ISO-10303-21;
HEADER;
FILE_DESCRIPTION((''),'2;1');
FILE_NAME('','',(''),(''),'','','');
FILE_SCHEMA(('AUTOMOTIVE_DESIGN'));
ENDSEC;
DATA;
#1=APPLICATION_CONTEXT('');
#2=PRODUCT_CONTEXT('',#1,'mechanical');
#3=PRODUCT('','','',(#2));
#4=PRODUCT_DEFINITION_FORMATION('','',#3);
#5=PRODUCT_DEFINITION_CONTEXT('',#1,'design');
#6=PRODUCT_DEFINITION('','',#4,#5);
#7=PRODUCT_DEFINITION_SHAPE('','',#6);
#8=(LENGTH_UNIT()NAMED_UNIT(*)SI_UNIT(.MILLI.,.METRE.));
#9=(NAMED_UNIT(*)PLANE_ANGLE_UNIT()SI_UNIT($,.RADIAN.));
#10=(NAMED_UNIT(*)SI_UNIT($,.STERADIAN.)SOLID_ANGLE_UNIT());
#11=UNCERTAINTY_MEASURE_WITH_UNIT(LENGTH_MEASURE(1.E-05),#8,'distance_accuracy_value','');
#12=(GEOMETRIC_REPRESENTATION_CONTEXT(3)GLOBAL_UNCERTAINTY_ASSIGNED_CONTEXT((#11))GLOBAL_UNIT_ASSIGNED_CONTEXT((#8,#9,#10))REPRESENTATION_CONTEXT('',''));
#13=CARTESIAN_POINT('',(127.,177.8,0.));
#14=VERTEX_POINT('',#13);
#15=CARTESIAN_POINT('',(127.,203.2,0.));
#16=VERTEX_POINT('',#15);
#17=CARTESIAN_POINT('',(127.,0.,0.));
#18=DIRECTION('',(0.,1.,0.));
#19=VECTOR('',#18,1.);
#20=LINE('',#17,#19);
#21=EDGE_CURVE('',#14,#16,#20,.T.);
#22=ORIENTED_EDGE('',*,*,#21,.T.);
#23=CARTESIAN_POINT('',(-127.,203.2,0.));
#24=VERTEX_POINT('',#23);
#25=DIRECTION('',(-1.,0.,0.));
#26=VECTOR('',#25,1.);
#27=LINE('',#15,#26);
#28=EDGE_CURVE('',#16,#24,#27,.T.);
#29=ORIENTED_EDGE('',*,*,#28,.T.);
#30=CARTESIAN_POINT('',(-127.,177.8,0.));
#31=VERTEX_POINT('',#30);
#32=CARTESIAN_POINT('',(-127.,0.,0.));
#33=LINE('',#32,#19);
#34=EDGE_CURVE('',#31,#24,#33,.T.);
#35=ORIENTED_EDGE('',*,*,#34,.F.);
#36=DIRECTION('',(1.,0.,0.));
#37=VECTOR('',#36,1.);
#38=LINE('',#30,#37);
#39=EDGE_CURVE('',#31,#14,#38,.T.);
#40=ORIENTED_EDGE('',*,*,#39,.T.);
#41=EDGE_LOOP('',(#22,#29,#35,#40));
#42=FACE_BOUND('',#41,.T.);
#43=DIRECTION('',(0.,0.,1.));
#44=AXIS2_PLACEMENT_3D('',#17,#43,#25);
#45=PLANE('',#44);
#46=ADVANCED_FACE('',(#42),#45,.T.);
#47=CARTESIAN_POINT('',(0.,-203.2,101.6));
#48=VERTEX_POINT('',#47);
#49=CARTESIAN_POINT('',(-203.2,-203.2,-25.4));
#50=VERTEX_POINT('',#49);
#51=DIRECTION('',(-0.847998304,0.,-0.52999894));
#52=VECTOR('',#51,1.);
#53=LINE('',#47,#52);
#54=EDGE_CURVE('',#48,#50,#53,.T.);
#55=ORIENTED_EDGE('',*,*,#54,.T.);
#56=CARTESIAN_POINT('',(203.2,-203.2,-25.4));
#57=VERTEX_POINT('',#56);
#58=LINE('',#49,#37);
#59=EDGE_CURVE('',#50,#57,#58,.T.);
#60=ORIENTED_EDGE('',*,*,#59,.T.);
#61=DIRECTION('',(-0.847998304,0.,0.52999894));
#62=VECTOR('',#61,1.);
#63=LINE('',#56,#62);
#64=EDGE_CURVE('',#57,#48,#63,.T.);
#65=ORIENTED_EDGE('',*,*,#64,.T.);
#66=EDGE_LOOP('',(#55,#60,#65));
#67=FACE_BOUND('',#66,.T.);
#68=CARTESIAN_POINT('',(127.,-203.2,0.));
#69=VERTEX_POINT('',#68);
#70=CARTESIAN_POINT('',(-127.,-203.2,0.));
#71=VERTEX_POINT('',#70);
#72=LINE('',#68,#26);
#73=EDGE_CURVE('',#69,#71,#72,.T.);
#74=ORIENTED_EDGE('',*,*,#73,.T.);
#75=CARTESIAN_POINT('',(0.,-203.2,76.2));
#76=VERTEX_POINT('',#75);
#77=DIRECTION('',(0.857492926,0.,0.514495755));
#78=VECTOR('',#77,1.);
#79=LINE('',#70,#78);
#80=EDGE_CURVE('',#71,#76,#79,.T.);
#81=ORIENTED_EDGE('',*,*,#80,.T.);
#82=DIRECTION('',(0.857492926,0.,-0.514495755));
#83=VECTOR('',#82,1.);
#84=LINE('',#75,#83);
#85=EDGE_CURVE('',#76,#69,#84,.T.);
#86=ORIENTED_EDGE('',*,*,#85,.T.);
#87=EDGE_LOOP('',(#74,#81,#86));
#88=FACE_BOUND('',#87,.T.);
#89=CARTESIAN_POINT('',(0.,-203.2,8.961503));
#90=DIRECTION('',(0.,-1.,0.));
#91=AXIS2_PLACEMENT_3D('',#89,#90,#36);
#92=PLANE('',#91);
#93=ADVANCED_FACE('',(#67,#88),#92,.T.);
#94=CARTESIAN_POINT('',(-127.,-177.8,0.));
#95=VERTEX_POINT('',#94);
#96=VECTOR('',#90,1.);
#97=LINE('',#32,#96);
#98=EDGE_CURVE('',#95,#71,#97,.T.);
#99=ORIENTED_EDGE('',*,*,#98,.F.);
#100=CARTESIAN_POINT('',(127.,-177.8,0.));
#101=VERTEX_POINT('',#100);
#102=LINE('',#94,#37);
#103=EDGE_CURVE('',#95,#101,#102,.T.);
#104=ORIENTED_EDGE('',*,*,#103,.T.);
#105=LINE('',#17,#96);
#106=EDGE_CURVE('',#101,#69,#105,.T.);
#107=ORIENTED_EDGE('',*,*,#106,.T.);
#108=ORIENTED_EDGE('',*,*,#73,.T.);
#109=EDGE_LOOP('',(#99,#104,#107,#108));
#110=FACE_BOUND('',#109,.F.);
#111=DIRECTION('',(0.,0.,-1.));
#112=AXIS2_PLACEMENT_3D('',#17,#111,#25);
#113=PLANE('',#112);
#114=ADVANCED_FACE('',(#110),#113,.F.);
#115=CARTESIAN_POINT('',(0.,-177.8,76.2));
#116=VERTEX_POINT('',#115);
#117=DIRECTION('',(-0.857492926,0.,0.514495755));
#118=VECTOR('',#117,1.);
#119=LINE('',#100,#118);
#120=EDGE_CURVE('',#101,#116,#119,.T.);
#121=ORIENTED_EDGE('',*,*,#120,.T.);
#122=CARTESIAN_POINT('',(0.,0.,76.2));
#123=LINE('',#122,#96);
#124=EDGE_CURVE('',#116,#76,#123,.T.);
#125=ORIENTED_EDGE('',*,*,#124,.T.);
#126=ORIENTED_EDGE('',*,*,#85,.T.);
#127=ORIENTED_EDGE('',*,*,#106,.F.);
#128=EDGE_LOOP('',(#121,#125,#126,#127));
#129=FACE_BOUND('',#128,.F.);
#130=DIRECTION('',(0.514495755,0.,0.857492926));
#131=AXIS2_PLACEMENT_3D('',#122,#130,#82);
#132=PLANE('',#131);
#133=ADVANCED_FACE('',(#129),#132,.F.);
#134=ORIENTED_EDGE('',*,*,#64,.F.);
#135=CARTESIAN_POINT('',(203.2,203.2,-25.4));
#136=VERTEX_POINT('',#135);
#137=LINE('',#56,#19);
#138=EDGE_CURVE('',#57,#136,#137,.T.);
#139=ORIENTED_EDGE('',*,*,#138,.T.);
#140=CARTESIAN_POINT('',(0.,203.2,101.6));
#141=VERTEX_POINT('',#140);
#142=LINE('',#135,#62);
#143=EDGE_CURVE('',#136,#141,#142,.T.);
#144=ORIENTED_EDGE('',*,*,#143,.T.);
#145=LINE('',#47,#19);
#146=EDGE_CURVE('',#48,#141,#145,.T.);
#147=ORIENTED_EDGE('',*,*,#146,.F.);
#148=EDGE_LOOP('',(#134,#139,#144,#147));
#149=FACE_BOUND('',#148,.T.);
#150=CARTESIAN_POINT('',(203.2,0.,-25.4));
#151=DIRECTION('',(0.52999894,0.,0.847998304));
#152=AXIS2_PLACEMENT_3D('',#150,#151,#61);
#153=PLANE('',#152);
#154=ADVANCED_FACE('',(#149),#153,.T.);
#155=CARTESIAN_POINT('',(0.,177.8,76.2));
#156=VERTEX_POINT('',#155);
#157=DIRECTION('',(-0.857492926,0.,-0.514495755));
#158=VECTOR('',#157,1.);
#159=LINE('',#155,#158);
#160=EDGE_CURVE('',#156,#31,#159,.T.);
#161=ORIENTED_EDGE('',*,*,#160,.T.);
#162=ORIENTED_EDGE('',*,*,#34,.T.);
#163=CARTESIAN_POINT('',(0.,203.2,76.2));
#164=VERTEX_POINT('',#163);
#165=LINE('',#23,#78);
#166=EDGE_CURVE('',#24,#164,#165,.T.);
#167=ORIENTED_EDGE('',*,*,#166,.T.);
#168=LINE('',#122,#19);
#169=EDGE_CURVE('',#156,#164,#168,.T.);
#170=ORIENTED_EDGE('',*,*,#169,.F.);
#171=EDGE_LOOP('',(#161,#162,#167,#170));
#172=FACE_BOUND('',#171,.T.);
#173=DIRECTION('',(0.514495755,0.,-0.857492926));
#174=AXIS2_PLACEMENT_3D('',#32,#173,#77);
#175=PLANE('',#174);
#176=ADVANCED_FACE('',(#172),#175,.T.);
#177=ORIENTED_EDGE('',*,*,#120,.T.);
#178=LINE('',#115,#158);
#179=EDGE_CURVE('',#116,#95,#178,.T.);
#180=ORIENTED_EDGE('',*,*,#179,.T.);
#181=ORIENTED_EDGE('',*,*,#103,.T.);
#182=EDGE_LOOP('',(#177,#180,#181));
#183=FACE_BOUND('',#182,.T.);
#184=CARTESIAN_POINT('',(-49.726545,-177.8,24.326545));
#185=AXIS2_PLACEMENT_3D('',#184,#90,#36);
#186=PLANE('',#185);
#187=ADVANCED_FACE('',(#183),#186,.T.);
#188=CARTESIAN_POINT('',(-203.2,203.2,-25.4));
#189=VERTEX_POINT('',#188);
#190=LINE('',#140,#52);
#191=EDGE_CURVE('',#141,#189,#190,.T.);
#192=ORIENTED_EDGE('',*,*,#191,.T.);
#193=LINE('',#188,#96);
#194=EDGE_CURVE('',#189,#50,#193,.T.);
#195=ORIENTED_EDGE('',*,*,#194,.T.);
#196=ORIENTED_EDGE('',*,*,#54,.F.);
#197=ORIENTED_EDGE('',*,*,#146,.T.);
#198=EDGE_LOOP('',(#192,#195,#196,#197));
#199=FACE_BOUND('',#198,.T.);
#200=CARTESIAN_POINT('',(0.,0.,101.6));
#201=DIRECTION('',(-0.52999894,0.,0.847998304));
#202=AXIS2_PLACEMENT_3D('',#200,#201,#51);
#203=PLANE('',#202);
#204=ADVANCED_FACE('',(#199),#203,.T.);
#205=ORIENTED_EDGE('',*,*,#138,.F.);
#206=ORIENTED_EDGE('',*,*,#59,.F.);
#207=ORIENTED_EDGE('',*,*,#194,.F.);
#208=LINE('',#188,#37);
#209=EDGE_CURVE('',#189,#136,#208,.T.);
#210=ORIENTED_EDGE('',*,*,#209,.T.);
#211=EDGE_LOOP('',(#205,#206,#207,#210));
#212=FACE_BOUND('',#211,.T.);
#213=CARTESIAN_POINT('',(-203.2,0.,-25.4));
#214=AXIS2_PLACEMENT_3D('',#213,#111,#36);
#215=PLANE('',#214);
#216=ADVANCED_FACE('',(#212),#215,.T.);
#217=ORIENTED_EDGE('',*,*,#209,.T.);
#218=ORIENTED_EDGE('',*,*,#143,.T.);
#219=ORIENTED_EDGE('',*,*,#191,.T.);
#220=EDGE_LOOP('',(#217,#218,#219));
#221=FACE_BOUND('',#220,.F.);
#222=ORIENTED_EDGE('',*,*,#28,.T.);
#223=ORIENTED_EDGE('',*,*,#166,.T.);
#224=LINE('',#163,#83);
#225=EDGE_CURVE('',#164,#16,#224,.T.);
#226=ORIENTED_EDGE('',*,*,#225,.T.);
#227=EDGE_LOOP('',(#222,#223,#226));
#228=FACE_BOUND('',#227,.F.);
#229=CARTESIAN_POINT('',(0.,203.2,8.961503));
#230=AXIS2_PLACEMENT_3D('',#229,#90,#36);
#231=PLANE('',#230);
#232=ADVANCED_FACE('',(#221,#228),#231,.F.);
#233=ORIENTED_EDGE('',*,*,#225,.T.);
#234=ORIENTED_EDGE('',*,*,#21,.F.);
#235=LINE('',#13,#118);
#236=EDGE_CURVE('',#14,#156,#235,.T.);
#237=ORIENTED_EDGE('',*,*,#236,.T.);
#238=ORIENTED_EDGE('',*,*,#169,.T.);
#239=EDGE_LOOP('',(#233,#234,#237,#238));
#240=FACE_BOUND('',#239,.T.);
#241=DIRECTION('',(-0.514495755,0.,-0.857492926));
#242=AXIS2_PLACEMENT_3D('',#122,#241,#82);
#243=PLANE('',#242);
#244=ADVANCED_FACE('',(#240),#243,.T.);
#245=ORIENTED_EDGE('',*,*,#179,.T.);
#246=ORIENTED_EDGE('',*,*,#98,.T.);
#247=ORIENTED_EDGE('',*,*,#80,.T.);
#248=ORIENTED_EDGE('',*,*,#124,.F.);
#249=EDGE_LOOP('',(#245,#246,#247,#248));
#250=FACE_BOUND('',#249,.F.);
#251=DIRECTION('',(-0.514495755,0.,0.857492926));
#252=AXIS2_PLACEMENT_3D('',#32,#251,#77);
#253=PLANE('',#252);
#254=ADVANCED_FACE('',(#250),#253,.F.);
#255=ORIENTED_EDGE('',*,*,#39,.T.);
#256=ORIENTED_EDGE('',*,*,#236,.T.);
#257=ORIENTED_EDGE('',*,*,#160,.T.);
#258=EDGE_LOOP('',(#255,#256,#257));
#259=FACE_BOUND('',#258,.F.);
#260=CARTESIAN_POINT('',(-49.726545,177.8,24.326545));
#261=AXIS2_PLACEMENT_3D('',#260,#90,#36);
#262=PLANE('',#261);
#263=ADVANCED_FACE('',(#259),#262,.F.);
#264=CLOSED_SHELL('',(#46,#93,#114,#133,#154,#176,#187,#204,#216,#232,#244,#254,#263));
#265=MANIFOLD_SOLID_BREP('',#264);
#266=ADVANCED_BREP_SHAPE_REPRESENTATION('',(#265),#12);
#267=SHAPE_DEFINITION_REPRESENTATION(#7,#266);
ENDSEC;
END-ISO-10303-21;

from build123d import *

# Parameters (mm, degrees)
F1_DEPTH = 177.8
F2_DEPTH = 177.8
F3_DEPTH = 203.2
F4_DEPTH = 203.2


with BuildPart() as f1:
    # F0 (on Front) → F1 (new body)
    with BuildSketch(Plane.XZ):
        Polygon((-127, 0), (0, 0), (0, 76.2), align=None)
        Polygon((0, 76.2), (0, 0), (127, 0), align=None)
    extrude(amount=F1_DEPTH)

    # F2 (add): a face of the model
    f2_faces = [f1.faces().sort_by_distance(p)[0] for p in [
        (0, 0, 25.4),
    ]]
    extrude(f2_faces, amount=F2_DEPTH)

    # F0 (on Front) → F3 (join)
    with BuildSketch(Plane.XZ):
        Polygon((0, 101.6), (-203.2, -25.4), (203.2, -25.4), align=None)
        Polygon((127, 0), (0, 0), (-127, 0), (0, 76.2), align=None, mode=Mode.SUBTRACT)
    extrude(amount=F3_DEPTH)

    # F0 (on Front) → F4 (join)
    with BuildSketch(Plane.XZ):
        Polygon((0, 101.6), (-203.2, -25.4), (203.2, -25.4), align=None)
        Polygon((127, 0), (0, 0), (-127, 0), (0, 76.2), align=None, mode=Mode.SUBTRACT)
    extrude(amount=-F4_DEPTH)


solid = f1.part
